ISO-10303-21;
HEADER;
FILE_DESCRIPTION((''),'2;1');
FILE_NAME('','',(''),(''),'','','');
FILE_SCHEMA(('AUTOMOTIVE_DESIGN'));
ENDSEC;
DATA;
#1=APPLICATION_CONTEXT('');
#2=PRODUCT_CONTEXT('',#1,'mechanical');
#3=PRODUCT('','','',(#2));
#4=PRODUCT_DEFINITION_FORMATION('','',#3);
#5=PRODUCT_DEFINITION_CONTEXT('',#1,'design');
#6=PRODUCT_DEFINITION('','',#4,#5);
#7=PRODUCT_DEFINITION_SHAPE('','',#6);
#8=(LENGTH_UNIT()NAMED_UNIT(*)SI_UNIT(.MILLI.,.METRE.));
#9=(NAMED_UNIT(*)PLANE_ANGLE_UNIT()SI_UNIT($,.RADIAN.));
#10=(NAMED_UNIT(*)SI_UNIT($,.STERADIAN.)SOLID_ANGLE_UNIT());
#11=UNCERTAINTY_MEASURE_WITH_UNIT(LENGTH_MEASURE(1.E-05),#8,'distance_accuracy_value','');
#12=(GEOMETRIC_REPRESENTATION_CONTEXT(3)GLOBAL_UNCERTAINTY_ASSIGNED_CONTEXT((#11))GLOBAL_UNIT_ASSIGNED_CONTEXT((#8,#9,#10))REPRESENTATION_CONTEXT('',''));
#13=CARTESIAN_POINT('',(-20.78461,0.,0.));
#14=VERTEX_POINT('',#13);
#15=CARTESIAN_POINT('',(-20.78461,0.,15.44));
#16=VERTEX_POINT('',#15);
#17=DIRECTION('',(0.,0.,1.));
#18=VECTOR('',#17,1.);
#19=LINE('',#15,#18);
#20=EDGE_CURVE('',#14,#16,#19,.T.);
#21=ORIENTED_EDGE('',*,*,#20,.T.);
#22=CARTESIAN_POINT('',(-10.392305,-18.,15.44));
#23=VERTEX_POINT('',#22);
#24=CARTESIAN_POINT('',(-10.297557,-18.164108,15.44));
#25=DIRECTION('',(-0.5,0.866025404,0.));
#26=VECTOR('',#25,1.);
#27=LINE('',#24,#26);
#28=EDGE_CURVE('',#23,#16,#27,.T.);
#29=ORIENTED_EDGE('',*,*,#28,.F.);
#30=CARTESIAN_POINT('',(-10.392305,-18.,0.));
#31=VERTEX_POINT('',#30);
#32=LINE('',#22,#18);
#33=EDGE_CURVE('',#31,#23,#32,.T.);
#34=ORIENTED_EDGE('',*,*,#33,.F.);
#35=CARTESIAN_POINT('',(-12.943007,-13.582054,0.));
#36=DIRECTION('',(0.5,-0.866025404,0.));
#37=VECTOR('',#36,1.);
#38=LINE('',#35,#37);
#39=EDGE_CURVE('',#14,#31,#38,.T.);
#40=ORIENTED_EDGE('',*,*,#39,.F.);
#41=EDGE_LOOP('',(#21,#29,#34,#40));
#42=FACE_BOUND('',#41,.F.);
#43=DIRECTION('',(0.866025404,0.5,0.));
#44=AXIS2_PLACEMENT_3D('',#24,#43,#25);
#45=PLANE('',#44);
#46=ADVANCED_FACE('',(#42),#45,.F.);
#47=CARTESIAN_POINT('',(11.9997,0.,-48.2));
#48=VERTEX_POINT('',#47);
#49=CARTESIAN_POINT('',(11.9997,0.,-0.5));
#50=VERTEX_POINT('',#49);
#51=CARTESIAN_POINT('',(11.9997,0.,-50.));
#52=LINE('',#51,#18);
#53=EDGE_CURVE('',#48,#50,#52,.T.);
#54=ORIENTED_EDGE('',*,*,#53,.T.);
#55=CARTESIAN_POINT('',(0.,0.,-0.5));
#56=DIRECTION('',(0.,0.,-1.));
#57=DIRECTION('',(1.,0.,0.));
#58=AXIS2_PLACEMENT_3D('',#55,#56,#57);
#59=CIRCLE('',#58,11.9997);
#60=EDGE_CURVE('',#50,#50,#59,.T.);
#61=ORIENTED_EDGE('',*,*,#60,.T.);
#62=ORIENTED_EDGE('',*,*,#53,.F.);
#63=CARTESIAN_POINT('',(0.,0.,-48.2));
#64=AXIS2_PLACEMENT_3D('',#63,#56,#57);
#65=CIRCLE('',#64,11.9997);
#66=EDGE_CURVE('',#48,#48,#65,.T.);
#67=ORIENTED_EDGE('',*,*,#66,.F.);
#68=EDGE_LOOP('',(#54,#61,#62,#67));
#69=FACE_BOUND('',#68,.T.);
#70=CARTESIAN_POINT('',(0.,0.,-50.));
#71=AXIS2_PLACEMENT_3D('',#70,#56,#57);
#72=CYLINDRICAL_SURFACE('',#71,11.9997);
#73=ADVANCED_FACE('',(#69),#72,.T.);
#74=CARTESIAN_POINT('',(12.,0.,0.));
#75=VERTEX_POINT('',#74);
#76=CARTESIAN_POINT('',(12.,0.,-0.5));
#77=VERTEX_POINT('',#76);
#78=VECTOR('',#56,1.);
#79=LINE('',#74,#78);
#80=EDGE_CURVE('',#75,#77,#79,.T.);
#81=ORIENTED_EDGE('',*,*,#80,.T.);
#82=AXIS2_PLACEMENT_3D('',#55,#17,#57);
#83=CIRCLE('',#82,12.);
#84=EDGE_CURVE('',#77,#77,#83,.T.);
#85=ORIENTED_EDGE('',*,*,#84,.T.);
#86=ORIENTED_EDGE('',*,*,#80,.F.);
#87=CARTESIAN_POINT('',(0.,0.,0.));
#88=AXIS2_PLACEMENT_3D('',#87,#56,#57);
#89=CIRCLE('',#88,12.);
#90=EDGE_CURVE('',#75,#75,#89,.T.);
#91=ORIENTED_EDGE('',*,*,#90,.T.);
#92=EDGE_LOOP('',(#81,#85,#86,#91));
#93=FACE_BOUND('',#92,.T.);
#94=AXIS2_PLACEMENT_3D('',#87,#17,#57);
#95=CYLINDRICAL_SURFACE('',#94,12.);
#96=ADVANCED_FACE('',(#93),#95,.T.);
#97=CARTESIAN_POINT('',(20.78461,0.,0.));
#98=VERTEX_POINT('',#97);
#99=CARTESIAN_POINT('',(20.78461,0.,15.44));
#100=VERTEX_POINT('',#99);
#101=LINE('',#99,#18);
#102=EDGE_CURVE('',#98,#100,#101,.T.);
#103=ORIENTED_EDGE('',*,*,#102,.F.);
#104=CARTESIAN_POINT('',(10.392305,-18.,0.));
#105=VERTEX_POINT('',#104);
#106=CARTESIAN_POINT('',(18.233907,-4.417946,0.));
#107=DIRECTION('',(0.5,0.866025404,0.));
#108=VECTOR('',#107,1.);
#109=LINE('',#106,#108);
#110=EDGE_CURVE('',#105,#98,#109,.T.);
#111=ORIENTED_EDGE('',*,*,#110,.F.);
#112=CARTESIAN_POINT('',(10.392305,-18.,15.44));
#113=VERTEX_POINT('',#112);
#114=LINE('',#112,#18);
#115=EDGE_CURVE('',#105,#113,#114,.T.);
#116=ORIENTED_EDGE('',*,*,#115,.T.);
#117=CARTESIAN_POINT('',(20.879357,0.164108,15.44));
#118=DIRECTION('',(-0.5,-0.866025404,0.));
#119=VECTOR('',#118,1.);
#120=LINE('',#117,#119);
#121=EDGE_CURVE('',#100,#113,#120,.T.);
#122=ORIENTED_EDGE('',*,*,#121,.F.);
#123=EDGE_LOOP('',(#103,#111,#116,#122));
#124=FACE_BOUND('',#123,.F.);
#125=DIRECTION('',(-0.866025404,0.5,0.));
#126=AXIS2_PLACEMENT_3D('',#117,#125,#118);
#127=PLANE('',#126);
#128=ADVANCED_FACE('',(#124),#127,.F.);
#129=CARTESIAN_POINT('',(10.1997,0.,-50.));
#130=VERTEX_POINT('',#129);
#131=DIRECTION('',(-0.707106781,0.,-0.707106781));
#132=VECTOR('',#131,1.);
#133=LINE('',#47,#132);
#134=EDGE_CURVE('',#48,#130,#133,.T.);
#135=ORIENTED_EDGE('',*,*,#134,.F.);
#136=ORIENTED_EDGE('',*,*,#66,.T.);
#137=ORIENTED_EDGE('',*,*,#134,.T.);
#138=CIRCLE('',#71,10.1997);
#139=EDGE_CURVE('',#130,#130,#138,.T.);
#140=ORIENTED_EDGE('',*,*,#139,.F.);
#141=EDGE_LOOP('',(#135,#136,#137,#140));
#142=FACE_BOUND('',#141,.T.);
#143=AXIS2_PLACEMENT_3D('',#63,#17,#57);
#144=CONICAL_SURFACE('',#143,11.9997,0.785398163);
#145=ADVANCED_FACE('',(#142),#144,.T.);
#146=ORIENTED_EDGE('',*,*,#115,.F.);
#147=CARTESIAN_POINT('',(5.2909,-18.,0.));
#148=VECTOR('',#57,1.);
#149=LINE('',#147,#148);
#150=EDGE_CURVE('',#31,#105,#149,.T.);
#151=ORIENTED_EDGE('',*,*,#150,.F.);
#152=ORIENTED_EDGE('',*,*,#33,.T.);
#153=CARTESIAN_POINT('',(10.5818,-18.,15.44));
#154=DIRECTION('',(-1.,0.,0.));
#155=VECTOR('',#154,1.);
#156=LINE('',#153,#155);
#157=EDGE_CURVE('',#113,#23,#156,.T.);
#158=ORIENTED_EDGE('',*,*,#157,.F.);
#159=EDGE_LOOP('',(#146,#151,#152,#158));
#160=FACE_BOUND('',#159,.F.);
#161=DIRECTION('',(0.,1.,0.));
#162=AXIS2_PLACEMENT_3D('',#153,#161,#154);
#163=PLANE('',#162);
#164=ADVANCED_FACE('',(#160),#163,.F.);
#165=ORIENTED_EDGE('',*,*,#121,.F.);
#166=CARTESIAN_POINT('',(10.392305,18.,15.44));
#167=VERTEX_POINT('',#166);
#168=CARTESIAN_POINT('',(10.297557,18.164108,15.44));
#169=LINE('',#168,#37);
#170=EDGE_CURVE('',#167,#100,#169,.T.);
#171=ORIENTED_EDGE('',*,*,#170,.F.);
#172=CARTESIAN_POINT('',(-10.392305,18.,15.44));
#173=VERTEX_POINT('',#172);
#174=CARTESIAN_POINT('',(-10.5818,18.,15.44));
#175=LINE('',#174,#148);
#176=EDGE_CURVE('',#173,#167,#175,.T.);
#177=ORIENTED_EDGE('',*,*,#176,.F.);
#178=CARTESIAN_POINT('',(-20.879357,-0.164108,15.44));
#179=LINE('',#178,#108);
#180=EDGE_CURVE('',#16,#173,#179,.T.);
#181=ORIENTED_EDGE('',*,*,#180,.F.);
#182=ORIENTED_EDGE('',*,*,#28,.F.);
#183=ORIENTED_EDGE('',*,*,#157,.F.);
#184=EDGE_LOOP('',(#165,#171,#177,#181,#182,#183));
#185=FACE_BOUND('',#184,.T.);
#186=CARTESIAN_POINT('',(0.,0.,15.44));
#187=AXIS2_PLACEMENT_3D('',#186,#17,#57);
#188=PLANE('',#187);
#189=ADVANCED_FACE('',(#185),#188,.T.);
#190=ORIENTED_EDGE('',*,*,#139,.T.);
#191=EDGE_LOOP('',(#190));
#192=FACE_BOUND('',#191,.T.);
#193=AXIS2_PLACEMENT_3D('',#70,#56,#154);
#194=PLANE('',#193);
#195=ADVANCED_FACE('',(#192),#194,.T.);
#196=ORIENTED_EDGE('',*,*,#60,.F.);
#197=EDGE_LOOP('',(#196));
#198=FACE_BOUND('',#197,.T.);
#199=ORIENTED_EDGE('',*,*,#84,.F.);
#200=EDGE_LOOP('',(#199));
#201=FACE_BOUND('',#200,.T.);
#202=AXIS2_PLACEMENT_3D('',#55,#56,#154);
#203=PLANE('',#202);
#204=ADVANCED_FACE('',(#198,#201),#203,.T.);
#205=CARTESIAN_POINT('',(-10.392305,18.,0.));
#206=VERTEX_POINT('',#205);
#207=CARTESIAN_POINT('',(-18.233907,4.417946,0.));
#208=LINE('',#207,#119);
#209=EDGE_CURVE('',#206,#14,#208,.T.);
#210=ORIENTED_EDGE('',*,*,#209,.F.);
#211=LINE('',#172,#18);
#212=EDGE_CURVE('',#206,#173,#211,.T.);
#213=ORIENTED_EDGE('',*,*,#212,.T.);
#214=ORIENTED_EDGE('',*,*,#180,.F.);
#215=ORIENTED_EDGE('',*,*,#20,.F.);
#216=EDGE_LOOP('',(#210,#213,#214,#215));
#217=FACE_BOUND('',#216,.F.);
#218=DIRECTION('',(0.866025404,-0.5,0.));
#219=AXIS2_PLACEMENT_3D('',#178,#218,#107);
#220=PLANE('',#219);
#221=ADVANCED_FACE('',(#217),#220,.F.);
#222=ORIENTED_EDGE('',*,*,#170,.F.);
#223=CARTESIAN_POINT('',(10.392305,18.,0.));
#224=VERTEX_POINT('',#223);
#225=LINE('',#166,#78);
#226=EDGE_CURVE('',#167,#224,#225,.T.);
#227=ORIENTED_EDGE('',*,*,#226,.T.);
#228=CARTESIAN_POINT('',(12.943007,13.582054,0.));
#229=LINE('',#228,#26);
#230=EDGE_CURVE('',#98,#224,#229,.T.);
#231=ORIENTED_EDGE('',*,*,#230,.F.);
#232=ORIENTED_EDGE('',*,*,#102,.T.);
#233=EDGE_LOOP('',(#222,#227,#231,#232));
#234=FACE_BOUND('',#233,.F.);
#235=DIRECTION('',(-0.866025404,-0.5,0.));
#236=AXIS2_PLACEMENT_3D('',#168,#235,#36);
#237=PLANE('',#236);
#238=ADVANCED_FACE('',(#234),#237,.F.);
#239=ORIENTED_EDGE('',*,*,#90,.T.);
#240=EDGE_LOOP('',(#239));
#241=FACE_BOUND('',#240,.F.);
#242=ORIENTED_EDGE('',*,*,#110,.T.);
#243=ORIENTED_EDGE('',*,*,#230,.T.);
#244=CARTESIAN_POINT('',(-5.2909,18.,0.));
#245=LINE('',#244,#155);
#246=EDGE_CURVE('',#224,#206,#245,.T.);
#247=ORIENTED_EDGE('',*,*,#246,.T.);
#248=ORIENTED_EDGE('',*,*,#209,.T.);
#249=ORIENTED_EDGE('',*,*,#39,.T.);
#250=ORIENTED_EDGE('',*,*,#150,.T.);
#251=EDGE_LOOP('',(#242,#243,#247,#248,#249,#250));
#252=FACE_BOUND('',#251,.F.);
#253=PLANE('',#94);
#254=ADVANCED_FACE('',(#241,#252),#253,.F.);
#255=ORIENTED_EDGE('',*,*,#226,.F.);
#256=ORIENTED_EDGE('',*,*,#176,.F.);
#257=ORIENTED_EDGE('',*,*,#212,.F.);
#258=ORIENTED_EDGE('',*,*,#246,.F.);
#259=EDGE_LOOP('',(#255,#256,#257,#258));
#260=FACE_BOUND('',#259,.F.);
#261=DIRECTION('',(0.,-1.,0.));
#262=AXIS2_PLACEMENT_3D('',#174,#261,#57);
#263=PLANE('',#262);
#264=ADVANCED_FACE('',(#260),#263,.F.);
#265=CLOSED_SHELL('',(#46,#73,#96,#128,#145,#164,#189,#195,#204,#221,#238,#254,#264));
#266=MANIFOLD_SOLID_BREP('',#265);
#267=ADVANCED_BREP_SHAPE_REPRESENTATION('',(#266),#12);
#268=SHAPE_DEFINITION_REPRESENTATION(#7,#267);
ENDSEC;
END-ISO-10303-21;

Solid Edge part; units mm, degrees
sketch "Sketch1" plane through (0, 0, 0) normal (0, 0, 1) x (1, 0, 0)
  circle A0 centre (0, 0) radius 20.88
  dimension "D1" = 41.76
extrude "Protrusion1" add sketch "Sketch1" along normal blind 15.44
sketch "Sketch2" plane through (0, 0, 0) normal (0, 0, -1) x (1, 0, 0)
  circle A0 centre (0, 0) radius 12
extrude "Protrusion2" add sketch "Sketch2" along normal blind 50
sketch "Sketch3" plane through (0, 0, -50) normal (0, 0, -1) x (1, 0, 0)
  circle A0 centre (0, 0) radius 11.9997
extrude "Cutout1" cut sketch "Sketch3" against normal blind 49.5 flip side to cut
chamfer "Chamfer_1" distance 1.8 angle 45 1 edges at (-11.9997, 0, -50)
sketch "Sketch4" plane through (0, 0, 15.44) normal (0, 0, 1) x (1, 0, 0)
  line L0 (-10.5818, 18) -> (10.5818, 18)
  dimension "D1" = 36
extrude "Cutout2" cut sketch "Sketch4" against normal up to next material side at (0, 18.05, 15.44)
pattern_circular "Pattern1" count 6 over 360 about axis through (0, 0, 15.44) along (0, 0, 1) of "Cutout2"
properties part number "24105902"
